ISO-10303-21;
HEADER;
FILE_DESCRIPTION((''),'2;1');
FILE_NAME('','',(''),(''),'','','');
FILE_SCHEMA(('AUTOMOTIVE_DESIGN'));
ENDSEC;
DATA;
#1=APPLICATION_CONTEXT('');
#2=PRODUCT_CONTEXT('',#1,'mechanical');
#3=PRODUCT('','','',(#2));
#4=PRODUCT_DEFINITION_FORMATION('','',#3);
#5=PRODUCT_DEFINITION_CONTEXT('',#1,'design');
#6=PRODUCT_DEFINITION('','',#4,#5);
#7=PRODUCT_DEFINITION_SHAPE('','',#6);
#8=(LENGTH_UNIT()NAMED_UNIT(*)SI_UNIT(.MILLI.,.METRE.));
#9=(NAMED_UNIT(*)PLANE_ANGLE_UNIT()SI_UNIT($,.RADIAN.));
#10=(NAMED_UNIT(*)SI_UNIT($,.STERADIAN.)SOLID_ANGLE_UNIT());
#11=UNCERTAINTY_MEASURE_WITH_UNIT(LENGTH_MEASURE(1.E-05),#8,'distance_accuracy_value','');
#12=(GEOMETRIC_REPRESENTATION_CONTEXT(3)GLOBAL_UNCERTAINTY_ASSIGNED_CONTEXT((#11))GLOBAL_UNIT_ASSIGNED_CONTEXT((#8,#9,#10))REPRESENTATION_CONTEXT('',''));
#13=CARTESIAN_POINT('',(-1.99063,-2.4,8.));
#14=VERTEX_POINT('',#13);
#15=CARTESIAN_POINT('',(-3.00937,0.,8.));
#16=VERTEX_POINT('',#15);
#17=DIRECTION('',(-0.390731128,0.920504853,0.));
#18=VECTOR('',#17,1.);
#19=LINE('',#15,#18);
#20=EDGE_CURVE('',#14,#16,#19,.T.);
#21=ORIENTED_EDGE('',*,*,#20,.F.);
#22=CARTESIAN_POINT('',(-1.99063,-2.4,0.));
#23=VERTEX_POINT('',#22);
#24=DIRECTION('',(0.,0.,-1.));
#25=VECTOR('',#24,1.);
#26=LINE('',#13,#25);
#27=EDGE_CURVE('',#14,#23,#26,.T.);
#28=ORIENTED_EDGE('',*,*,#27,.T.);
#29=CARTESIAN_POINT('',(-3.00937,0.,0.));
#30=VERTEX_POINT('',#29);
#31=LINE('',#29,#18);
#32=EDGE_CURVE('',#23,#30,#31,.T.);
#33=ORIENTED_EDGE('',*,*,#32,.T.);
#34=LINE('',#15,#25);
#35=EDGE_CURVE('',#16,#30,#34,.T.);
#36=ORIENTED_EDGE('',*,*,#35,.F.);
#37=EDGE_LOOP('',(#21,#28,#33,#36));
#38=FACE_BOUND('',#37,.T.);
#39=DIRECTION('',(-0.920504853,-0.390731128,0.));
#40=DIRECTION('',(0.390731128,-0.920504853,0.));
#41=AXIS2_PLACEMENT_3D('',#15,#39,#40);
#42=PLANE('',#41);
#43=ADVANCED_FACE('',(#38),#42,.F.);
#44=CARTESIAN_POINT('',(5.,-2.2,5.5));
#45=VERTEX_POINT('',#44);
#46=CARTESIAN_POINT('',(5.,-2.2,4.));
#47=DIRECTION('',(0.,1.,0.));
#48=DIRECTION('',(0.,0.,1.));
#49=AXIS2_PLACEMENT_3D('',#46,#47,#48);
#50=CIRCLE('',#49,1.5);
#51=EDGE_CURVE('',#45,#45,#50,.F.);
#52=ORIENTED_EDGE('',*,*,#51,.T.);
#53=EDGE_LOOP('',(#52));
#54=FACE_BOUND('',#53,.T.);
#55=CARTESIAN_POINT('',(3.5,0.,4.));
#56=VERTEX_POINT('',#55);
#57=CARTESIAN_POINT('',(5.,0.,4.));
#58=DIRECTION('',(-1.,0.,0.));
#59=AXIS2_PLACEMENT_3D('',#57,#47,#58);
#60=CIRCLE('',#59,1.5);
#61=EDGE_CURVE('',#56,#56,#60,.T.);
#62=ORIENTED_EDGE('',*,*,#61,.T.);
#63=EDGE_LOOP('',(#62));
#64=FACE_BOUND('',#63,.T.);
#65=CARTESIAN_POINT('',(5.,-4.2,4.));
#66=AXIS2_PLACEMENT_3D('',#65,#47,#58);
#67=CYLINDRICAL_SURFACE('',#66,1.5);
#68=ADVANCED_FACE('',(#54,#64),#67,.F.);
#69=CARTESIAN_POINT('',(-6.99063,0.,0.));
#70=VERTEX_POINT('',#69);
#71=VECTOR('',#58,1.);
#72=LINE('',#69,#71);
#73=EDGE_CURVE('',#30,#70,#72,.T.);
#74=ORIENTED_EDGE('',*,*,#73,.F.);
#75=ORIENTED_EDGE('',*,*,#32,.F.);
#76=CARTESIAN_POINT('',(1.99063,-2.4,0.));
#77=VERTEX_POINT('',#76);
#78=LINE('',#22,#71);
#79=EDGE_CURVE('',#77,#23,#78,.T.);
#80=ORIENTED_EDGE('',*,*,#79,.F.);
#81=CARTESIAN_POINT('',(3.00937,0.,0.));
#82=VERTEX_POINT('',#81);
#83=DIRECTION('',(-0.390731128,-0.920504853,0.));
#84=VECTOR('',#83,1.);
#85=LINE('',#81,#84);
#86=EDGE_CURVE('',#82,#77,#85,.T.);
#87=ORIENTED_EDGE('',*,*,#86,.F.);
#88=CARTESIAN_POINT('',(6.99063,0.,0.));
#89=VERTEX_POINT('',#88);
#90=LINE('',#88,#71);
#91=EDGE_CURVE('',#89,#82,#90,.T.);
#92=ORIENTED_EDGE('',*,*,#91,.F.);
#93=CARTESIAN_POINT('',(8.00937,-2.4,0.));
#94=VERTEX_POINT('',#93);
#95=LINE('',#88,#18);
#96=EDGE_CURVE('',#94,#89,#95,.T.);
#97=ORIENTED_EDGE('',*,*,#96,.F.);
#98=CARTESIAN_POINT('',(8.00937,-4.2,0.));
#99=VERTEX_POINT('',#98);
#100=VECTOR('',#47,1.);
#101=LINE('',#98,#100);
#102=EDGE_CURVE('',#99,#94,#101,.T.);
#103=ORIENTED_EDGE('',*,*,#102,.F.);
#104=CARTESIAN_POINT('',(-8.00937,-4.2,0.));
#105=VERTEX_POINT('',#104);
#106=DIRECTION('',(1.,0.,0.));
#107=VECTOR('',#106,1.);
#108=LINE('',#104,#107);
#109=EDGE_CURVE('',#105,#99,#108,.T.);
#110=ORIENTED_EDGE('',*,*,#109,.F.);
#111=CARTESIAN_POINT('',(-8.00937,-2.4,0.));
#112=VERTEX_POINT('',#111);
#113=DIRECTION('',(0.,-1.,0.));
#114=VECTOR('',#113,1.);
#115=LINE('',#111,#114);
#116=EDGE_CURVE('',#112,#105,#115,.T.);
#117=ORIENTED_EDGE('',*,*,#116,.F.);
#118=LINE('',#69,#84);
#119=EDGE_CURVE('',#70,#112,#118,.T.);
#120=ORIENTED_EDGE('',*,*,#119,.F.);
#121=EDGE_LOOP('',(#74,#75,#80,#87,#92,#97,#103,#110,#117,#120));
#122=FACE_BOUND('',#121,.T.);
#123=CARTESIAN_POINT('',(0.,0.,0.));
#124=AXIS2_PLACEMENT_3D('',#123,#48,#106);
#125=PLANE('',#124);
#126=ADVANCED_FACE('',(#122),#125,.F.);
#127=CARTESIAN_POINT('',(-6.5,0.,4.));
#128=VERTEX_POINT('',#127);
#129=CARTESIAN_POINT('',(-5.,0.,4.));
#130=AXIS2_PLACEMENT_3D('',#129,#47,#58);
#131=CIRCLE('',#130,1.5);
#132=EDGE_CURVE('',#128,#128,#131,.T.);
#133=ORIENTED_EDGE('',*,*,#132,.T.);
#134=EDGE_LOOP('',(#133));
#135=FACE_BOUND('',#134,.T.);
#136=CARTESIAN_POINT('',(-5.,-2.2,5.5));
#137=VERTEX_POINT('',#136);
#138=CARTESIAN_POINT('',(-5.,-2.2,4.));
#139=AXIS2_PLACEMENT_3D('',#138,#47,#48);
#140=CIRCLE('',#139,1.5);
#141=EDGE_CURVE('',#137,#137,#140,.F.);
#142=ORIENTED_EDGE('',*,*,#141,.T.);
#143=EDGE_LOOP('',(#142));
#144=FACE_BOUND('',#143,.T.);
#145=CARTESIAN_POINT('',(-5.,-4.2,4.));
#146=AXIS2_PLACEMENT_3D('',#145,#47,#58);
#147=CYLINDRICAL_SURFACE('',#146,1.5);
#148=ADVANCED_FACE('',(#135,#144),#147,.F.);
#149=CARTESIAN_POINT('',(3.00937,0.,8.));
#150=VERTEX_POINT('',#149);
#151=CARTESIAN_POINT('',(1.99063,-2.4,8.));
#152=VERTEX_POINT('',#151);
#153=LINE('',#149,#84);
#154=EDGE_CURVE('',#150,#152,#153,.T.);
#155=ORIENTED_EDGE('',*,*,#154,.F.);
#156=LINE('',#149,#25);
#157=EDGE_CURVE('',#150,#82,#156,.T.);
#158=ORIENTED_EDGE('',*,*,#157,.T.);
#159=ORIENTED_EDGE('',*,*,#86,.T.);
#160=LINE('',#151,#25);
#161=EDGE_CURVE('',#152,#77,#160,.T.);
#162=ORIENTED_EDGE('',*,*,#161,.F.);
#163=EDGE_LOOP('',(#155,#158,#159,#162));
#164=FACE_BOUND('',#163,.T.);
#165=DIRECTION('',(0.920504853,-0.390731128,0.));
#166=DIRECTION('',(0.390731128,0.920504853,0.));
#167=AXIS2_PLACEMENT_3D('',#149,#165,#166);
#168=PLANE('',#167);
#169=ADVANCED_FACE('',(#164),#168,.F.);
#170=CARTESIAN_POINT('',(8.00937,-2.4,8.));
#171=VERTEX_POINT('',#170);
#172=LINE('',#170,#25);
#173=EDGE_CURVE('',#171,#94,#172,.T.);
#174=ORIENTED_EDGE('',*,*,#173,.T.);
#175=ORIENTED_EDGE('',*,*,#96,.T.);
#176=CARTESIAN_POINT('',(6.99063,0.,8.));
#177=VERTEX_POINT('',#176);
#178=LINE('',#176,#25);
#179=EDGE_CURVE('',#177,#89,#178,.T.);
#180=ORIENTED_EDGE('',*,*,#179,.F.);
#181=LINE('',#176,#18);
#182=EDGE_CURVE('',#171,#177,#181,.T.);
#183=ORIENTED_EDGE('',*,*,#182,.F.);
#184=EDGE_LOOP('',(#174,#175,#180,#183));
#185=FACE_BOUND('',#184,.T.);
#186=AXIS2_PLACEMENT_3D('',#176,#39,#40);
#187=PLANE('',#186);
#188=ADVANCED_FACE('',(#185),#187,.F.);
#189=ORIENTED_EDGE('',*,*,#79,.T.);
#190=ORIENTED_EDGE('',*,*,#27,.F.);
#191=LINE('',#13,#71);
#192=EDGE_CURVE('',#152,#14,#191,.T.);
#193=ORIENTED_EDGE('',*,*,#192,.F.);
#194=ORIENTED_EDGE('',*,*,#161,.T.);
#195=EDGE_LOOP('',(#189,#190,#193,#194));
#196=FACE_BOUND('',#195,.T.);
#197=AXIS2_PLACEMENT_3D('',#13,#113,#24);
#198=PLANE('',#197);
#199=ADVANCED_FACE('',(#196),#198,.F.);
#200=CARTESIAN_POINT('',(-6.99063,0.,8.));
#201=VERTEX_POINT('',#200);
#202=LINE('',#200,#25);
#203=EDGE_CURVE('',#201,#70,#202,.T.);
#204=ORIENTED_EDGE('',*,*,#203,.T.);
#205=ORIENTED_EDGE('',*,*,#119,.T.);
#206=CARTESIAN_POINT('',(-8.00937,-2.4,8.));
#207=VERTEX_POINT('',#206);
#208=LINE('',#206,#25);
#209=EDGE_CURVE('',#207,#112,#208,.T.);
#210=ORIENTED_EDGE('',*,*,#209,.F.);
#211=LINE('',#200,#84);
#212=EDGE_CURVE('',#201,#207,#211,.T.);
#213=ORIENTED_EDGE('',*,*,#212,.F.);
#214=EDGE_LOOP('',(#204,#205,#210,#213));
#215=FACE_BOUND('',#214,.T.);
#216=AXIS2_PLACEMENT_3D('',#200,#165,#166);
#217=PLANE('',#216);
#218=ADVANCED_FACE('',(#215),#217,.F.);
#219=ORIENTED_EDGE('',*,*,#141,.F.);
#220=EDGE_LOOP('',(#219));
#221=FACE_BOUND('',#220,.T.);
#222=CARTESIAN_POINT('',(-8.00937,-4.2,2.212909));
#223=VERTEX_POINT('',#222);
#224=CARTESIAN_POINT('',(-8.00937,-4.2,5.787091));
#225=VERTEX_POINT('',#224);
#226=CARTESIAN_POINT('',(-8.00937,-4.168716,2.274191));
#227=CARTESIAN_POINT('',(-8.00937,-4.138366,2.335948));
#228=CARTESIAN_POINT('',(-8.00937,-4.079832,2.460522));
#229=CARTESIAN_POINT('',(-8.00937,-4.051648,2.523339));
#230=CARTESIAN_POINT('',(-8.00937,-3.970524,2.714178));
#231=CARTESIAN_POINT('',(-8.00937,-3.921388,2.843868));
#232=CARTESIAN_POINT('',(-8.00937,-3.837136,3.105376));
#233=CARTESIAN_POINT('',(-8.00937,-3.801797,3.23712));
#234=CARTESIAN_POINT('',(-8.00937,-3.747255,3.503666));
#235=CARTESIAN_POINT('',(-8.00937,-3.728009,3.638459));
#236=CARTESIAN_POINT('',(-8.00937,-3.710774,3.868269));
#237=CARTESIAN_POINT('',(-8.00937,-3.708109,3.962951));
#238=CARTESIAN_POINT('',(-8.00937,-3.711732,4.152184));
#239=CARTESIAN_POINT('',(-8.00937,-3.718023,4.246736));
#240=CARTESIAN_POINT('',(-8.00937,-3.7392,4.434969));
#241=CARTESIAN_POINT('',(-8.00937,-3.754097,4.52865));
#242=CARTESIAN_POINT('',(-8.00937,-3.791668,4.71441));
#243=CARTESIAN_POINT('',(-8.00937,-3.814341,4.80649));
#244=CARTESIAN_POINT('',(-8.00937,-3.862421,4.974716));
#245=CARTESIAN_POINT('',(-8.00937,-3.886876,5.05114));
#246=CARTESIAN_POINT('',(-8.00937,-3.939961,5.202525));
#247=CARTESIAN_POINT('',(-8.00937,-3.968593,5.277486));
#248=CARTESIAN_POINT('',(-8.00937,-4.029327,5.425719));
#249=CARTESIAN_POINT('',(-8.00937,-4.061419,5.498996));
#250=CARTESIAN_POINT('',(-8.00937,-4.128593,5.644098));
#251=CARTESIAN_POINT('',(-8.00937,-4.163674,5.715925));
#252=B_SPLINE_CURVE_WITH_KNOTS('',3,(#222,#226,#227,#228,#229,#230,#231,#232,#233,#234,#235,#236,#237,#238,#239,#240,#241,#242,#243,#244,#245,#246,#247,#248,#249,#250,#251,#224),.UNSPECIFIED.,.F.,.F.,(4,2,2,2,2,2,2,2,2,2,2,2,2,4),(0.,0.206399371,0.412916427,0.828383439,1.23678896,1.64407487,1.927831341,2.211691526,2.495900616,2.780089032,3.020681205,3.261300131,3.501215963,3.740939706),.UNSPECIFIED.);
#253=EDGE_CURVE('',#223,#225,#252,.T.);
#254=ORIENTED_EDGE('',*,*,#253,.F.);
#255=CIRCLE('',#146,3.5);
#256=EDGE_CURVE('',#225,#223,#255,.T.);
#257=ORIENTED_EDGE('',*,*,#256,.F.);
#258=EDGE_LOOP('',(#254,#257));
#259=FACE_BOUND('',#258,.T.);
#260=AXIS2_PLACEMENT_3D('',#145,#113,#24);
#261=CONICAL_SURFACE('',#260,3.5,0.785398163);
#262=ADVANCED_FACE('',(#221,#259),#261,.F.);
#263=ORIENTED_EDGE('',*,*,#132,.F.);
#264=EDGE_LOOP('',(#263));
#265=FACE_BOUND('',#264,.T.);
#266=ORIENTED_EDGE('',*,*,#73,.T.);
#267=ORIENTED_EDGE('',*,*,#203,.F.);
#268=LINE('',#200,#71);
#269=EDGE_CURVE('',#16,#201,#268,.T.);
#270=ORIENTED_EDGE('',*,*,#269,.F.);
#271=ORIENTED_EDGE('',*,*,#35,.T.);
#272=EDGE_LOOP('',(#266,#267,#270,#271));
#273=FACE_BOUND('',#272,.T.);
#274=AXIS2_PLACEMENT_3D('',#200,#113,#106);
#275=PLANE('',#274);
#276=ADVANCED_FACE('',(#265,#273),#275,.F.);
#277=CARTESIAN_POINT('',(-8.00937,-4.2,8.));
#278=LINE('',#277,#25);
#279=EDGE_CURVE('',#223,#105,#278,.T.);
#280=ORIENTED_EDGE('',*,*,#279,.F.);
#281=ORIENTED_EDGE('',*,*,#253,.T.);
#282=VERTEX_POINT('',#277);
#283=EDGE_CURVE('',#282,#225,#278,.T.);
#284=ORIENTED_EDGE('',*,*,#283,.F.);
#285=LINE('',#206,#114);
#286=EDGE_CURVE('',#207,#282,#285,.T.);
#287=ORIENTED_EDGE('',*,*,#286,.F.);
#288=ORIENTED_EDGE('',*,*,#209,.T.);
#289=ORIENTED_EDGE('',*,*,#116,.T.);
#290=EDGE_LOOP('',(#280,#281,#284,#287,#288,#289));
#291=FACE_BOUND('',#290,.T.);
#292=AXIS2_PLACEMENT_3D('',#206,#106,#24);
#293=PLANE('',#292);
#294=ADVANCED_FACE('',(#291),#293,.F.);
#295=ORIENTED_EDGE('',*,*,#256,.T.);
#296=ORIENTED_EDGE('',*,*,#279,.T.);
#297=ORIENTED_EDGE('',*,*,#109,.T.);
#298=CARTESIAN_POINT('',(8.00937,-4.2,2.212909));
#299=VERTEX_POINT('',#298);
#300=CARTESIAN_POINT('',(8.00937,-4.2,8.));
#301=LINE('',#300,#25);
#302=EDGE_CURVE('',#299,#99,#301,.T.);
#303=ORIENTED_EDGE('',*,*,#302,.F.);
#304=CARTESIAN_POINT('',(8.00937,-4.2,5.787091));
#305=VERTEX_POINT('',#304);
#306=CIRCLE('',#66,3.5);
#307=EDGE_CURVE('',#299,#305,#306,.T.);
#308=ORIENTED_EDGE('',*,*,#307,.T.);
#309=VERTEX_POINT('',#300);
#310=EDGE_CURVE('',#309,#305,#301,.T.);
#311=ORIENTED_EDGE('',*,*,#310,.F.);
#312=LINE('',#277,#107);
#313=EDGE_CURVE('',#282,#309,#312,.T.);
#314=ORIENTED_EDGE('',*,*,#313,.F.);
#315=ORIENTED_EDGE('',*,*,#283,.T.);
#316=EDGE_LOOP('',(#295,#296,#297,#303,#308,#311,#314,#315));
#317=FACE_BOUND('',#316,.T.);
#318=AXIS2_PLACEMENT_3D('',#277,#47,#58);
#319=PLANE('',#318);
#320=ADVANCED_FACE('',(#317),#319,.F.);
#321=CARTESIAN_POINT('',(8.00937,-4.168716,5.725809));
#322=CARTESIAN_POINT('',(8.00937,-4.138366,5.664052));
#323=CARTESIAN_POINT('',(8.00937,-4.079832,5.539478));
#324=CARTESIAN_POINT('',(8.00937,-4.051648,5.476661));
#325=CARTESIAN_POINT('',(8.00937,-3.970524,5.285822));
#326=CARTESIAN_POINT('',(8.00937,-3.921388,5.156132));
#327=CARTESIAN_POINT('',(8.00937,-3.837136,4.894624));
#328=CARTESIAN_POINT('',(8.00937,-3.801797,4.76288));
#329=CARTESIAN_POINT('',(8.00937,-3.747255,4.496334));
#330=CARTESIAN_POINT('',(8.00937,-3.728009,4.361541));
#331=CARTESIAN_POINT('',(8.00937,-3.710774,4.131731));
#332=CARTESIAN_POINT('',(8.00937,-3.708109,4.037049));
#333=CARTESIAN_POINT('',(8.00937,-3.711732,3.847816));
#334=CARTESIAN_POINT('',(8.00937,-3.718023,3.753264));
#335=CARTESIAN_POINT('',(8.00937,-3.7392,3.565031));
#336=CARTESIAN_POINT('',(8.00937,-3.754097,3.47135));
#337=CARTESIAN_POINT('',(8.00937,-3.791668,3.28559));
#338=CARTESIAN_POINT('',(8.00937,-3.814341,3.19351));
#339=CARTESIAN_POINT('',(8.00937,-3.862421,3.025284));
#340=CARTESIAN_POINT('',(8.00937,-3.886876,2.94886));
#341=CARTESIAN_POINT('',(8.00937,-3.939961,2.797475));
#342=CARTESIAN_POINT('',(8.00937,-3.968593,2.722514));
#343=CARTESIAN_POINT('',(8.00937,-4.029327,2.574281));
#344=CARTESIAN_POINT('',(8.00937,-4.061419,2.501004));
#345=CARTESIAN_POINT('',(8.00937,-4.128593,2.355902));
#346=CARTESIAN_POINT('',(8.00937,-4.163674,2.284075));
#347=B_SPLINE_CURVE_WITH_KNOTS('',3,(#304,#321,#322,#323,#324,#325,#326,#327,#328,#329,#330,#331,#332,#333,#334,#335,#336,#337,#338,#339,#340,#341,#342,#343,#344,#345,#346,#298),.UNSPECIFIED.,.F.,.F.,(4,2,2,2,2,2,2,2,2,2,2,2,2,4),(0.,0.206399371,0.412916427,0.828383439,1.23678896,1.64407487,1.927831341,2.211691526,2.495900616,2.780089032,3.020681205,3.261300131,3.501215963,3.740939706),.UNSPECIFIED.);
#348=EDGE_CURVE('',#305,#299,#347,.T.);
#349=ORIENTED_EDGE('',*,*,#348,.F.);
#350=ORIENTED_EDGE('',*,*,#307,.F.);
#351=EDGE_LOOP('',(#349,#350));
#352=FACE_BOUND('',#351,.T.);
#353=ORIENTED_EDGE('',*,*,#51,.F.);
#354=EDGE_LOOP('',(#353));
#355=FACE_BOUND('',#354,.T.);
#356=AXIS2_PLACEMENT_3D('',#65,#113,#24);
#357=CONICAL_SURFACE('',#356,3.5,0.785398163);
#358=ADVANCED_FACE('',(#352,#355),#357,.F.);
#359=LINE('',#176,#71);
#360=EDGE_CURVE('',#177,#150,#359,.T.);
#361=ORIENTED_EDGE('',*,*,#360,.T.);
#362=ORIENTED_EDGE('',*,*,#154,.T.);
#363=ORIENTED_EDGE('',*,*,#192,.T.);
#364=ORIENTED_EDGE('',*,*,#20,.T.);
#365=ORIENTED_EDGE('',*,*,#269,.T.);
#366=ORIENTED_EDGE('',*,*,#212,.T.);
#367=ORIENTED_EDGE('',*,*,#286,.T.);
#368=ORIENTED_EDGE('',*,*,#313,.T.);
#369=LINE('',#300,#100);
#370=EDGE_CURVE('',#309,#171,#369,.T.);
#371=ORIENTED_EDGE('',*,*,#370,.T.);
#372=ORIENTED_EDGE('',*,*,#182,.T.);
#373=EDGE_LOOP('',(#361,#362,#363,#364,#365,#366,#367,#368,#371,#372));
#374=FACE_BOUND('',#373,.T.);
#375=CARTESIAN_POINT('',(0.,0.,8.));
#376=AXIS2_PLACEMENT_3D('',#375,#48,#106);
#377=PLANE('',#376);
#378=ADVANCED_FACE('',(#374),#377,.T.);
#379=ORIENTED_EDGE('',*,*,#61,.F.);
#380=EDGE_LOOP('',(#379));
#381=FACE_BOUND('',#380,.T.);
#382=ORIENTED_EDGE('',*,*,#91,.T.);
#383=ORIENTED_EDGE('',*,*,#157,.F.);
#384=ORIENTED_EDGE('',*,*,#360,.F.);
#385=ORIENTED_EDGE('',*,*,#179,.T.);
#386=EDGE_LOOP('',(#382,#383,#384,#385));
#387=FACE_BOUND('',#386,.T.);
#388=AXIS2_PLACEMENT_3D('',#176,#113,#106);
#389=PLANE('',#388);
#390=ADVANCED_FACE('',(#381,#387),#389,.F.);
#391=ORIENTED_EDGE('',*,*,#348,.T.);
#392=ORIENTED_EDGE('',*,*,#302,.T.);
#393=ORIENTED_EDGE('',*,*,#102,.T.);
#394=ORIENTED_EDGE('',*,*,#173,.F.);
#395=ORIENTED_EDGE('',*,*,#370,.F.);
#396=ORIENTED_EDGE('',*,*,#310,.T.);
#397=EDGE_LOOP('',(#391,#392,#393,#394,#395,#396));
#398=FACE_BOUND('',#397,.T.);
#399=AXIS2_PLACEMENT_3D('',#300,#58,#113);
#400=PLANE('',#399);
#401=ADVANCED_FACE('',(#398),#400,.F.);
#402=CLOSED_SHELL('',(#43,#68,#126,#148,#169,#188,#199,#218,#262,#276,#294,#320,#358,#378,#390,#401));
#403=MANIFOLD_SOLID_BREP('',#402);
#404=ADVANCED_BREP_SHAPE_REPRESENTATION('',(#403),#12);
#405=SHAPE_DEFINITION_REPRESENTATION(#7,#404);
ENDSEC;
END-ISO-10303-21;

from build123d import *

# Parameters (mm, degrees)
EXTRUDE_1_DEPTH     = 8
SKETCH_2_R          = 1.5
CUT_EXTRUDE_1_DEPTH = 13.074353161
CHAMFER_1_SIZE      = 2


with BuildPart() as part:
    # ｽｹｯﾁ1 → ﾎﾞｽ - 押し出し1 (new body)
    with BuildSketch(Plane.XY):
        Polygon((-6.990630221, 0), (-3.009369779, 0), (-1.990630221, -2.4), (1.990630221, -2.4), (3.009369779, 0), (6.990630221, 0), (8.009369779, -2.4), (8.009369779, -4.2), (-8.009369779, -4.2), (-8.009369779, -2.4), align=None)
    extrude(amount=EXTRUDE_1_DEPTH)

    # ｽｹｯﾁ2 → ｶｯﾄ - 押し出し1 (cut, through all)
    with BuildSketch(Plane(origin=(0, 0, 0), x_dir=(1, 0, 0), z_dir=(0, 1, 0))):
        with Locations(Location((-5, -4, 0), (0, 0, 180))):
            Circle(SKETCH_2_R)
        with Locations(Location((5, -4, 0), (0, 0, 180))):
            Circle(SKETCH_2_R)
    extrude(amount=-CUT_EXTRUDE_1_DEPTH, mode=Mode.SUBTRACT)

    # 面取り1
    # the kernel refuses this chamfer: 2 mm, written as the material it takes off along each edge
    with BuildSketch(Plane(origin=(-5, -4.2, 4), x_dir=(-1, 0, 0), z_dir=(0, 0, -1))) as chamfer_1_piece_1:
        Polygon((1.5, CHAMFER_1_SIZE), (1.5 + CHAMFER_1_SIZE, 0), (1.5, 0), align=None)
    revolve(axis=Axis((-5, -4.2, 4), (0, 1, 0)), mode=Mode.SUBTRACT)
    with BuildSketch(Plane(origin=(5, -4.2, 4), x_dir=(-1, 0, 0), z_dir=(0, 0, -1))) as chamfer_1_piece_2:
        Polygon((1.5 + CHAMFER_1_SIZE, 0), (1.5, CHAMFER_1_SIZE), (1.5, 0), align=None)
    revolve(axis=Axis((5, -4.2, 4), (0, 1, 0)), mode=Mode.SUBTRACT)


solid = part.part
